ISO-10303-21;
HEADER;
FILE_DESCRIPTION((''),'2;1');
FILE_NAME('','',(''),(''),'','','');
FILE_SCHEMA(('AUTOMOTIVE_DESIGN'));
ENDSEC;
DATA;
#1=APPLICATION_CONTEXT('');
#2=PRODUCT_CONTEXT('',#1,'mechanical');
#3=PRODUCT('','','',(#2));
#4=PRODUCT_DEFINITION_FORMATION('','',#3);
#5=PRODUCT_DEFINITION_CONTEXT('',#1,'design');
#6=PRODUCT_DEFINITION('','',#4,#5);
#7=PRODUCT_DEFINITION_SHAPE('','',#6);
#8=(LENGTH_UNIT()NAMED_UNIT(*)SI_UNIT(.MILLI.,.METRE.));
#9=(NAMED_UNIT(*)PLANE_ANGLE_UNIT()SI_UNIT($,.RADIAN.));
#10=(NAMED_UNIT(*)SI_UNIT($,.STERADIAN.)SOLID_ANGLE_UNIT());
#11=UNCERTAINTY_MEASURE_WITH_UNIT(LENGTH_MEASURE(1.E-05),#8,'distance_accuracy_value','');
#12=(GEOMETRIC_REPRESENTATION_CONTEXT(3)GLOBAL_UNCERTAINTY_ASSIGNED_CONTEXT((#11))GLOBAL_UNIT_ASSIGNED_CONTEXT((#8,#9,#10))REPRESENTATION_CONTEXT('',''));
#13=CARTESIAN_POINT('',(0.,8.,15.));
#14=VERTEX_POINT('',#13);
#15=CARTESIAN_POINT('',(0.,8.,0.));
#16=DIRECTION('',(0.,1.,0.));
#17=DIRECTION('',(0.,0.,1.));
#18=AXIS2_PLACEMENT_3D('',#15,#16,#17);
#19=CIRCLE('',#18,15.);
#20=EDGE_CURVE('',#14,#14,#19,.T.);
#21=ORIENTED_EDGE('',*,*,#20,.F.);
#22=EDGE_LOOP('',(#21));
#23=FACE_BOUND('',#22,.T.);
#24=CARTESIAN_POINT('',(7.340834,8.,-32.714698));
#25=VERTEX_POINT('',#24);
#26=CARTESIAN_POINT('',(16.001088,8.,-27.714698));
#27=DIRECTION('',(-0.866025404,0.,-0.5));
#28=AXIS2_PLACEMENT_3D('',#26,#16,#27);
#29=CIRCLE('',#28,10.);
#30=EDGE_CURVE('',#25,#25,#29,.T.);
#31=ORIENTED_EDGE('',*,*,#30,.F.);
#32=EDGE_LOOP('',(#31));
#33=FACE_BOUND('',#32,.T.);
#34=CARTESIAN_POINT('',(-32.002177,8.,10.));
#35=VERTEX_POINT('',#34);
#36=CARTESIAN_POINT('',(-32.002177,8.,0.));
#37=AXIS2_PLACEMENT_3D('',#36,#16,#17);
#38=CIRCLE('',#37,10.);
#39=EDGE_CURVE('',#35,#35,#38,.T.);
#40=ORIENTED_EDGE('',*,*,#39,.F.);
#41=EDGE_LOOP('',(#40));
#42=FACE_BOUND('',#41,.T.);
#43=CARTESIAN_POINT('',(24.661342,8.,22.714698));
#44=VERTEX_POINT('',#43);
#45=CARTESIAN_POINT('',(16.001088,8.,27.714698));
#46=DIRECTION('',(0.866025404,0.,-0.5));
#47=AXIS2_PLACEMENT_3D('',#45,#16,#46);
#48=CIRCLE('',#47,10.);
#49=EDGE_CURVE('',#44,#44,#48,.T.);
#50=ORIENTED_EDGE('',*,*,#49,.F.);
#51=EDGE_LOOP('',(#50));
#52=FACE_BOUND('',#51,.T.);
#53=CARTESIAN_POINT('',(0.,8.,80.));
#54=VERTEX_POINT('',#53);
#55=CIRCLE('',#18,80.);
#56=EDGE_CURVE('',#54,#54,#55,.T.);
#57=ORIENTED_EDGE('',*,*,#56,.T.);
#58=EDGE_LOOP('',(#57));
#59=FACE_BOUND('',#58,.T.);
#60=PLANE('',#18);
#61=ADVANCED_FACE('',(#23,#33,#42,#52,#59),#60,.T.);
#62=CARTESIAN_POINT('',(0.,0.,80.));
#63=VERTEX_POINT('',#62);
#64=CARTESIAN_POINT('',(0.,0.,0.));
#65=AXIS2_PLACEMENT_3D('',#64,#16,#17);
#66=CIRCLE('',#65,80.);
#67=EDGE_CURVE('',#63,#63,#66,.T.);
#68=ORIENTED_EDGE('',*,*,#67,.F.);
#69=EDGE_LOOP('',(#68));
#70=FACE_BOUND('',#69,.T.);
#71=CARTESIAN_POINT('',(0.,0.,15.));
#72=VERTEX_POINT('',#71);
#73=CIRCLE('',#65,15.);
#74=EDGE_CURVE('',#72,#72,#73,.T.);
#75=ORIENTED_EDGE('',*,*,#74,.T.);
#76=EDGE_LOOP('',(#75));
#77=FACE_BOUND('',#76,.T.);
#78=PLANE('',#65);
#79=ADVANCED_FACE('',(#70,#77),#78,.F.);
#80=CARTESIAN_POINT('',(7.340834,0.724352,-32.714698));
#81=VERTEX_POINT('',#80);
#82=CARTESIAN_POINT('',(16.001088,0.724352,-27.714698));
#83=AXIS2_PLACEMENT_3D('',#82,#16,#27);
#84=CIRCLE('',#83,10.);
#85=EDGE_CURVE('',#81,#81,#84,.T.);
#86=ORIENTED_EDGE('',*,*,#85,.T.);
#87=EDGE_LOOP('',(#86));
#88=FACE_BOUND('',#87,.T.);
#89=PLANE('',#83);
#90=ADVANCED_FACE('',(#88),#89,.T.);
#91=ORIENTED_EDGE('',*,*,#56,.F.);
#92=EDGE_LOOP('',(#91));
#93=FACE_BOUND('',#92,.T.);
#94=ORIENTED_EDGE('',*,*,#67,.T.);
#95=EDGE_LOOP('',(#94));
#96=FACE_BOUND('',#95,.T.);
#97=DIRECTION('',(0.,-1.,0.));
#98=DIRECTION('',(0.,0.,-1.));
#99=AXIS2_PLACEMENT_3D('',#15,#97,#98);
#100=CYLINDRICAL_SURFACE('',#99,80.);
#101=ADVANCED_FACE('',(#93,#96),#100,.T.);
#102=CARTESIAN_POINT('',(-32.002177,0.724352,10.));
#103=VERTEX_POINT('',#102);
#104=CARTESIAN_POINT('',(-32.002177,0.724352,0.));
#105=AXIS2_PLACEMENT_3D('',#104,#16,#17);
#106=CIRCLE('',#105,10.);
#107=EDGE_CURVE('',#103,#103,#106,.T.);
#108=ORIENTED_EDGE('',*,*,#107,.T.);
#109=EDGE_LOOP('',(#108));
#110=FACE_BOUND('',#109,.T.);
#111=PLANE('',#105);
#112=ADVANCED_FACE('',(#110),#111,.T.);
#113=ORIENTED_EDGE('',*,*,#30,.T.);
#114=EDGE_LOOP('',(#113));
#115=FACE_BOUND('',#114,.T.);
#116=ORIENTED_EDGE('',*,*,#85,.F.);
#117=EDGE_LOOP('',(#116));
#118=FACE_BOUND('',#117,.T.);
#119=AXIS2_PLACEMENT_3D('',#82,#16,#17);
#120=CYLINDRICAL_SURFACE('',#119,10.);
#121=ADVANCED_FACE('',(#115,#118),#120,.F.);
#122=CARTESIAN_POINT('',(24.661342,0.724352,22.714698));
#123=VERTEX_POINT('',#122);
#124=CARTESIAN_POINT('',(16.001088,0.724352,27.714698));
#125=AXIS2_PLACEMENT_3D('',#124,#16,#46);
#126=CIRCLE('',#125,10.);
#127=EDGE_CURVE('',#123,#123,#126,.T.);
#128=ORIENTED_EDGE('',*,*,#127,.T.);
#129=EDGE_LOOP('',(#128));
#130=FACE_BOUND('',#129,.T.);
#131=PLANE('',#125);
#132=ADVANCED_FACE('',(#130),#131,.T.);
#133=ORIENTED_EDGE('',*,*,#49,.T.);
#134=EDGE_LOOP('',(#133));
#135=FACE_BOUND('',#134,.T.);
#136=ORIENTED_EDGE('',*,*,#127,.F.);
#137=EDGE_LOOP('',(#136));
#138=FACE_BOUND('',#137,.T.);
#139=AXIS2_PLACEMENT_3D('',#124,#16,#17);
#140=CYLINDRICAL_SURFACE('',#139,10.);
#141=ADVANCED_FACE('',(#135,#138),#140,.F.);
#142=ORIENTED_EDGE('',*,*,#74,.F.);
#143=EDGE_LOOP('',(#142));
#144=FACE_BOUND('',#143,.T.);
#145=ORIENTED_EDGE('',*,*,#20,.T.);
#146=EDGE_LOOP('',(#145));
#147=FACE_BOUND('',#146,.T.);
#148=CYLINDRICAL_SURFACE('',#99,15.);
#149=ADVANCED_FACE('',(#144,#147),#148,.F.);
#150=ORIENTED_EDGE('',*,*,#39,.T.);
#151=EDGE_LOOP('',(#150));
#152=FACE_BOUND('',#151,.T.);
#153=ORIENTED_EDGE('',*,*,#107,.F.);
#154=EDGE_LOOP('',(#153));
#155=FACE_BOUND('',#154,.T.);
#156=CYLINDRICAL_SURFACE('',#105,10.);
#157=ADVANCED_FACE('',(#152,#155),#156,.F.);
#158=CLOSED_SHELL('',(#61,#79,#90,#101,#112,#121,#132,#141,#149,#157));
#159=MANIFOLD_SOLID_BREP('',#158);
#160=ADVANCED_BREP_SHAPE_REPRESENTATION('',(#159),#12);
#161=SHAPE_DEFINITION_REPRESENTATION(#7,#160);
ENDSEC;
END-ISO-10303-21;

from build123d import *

# Parameters (mm, degrees)
SKETCH1_R           = 80
BOSS_EXTRUDE1_DEPTH = 8
SKETCH2_R           = 15
CUT_EXTRUDE1_DEPTH  = 114.41957503
SKETCH3_R           = 10
CUT_EXTRUDE2_DEPTH  = 7.275648392
CIRPATTERN1_COUNT   = 3


with BuildPart() as part:
    # Sketch1 → Boss-Extrude1 (new body)
    with BuildSketch(Plane(origin=(0, 0, 0), x_dir=(1, 0, 0), z_dir=(0, 1, 0))):
        Circle(SKETCH1_R)
    extrude(amount=BOSS_EXTRUDE1_DEPTH)

    # Sketch2 → Cut-Extrude1 (cut, through all)
    with BuildSketch(Plane(origin=(0, 0, 0), x_dir=(1, 0, 0), z_dir=(0, 1, 0))):
        Circle(SKETCH2_R)
    extrude(amount=CUT_EXTRUDE1_DEPTH, mode=Mode.SUBTRACT)

    # Sketch3 → Cut-Extrude2 (cut)
    with BuildSketch(Plane(origin=(0, 8, 0), x_dir=(1, 0, 0), z_dir=(0, 1, 0))):
        with Locations((-32.002176573, 0)):
            Circle(SKETCH3_R)
    cut_extrude2 = extrude(amount=-CUT_EXTRUDE2_DEPTH, mode=Mode.SUBTRACT)

    # CirPattern1: Cut-Extrude2 ×3 about axis
    cirpattern1_axis = Axis((0, 0, 0), (0, 1, 0))
    for i in range(1, CIRPATTERN1_COUNT):
        add(cut_extrude2.rotate(cirpattern1_axis, i * 360 / CIRPATTERN1_COUNT), mode=Mode.SUBTRACT)


solid = part.part
